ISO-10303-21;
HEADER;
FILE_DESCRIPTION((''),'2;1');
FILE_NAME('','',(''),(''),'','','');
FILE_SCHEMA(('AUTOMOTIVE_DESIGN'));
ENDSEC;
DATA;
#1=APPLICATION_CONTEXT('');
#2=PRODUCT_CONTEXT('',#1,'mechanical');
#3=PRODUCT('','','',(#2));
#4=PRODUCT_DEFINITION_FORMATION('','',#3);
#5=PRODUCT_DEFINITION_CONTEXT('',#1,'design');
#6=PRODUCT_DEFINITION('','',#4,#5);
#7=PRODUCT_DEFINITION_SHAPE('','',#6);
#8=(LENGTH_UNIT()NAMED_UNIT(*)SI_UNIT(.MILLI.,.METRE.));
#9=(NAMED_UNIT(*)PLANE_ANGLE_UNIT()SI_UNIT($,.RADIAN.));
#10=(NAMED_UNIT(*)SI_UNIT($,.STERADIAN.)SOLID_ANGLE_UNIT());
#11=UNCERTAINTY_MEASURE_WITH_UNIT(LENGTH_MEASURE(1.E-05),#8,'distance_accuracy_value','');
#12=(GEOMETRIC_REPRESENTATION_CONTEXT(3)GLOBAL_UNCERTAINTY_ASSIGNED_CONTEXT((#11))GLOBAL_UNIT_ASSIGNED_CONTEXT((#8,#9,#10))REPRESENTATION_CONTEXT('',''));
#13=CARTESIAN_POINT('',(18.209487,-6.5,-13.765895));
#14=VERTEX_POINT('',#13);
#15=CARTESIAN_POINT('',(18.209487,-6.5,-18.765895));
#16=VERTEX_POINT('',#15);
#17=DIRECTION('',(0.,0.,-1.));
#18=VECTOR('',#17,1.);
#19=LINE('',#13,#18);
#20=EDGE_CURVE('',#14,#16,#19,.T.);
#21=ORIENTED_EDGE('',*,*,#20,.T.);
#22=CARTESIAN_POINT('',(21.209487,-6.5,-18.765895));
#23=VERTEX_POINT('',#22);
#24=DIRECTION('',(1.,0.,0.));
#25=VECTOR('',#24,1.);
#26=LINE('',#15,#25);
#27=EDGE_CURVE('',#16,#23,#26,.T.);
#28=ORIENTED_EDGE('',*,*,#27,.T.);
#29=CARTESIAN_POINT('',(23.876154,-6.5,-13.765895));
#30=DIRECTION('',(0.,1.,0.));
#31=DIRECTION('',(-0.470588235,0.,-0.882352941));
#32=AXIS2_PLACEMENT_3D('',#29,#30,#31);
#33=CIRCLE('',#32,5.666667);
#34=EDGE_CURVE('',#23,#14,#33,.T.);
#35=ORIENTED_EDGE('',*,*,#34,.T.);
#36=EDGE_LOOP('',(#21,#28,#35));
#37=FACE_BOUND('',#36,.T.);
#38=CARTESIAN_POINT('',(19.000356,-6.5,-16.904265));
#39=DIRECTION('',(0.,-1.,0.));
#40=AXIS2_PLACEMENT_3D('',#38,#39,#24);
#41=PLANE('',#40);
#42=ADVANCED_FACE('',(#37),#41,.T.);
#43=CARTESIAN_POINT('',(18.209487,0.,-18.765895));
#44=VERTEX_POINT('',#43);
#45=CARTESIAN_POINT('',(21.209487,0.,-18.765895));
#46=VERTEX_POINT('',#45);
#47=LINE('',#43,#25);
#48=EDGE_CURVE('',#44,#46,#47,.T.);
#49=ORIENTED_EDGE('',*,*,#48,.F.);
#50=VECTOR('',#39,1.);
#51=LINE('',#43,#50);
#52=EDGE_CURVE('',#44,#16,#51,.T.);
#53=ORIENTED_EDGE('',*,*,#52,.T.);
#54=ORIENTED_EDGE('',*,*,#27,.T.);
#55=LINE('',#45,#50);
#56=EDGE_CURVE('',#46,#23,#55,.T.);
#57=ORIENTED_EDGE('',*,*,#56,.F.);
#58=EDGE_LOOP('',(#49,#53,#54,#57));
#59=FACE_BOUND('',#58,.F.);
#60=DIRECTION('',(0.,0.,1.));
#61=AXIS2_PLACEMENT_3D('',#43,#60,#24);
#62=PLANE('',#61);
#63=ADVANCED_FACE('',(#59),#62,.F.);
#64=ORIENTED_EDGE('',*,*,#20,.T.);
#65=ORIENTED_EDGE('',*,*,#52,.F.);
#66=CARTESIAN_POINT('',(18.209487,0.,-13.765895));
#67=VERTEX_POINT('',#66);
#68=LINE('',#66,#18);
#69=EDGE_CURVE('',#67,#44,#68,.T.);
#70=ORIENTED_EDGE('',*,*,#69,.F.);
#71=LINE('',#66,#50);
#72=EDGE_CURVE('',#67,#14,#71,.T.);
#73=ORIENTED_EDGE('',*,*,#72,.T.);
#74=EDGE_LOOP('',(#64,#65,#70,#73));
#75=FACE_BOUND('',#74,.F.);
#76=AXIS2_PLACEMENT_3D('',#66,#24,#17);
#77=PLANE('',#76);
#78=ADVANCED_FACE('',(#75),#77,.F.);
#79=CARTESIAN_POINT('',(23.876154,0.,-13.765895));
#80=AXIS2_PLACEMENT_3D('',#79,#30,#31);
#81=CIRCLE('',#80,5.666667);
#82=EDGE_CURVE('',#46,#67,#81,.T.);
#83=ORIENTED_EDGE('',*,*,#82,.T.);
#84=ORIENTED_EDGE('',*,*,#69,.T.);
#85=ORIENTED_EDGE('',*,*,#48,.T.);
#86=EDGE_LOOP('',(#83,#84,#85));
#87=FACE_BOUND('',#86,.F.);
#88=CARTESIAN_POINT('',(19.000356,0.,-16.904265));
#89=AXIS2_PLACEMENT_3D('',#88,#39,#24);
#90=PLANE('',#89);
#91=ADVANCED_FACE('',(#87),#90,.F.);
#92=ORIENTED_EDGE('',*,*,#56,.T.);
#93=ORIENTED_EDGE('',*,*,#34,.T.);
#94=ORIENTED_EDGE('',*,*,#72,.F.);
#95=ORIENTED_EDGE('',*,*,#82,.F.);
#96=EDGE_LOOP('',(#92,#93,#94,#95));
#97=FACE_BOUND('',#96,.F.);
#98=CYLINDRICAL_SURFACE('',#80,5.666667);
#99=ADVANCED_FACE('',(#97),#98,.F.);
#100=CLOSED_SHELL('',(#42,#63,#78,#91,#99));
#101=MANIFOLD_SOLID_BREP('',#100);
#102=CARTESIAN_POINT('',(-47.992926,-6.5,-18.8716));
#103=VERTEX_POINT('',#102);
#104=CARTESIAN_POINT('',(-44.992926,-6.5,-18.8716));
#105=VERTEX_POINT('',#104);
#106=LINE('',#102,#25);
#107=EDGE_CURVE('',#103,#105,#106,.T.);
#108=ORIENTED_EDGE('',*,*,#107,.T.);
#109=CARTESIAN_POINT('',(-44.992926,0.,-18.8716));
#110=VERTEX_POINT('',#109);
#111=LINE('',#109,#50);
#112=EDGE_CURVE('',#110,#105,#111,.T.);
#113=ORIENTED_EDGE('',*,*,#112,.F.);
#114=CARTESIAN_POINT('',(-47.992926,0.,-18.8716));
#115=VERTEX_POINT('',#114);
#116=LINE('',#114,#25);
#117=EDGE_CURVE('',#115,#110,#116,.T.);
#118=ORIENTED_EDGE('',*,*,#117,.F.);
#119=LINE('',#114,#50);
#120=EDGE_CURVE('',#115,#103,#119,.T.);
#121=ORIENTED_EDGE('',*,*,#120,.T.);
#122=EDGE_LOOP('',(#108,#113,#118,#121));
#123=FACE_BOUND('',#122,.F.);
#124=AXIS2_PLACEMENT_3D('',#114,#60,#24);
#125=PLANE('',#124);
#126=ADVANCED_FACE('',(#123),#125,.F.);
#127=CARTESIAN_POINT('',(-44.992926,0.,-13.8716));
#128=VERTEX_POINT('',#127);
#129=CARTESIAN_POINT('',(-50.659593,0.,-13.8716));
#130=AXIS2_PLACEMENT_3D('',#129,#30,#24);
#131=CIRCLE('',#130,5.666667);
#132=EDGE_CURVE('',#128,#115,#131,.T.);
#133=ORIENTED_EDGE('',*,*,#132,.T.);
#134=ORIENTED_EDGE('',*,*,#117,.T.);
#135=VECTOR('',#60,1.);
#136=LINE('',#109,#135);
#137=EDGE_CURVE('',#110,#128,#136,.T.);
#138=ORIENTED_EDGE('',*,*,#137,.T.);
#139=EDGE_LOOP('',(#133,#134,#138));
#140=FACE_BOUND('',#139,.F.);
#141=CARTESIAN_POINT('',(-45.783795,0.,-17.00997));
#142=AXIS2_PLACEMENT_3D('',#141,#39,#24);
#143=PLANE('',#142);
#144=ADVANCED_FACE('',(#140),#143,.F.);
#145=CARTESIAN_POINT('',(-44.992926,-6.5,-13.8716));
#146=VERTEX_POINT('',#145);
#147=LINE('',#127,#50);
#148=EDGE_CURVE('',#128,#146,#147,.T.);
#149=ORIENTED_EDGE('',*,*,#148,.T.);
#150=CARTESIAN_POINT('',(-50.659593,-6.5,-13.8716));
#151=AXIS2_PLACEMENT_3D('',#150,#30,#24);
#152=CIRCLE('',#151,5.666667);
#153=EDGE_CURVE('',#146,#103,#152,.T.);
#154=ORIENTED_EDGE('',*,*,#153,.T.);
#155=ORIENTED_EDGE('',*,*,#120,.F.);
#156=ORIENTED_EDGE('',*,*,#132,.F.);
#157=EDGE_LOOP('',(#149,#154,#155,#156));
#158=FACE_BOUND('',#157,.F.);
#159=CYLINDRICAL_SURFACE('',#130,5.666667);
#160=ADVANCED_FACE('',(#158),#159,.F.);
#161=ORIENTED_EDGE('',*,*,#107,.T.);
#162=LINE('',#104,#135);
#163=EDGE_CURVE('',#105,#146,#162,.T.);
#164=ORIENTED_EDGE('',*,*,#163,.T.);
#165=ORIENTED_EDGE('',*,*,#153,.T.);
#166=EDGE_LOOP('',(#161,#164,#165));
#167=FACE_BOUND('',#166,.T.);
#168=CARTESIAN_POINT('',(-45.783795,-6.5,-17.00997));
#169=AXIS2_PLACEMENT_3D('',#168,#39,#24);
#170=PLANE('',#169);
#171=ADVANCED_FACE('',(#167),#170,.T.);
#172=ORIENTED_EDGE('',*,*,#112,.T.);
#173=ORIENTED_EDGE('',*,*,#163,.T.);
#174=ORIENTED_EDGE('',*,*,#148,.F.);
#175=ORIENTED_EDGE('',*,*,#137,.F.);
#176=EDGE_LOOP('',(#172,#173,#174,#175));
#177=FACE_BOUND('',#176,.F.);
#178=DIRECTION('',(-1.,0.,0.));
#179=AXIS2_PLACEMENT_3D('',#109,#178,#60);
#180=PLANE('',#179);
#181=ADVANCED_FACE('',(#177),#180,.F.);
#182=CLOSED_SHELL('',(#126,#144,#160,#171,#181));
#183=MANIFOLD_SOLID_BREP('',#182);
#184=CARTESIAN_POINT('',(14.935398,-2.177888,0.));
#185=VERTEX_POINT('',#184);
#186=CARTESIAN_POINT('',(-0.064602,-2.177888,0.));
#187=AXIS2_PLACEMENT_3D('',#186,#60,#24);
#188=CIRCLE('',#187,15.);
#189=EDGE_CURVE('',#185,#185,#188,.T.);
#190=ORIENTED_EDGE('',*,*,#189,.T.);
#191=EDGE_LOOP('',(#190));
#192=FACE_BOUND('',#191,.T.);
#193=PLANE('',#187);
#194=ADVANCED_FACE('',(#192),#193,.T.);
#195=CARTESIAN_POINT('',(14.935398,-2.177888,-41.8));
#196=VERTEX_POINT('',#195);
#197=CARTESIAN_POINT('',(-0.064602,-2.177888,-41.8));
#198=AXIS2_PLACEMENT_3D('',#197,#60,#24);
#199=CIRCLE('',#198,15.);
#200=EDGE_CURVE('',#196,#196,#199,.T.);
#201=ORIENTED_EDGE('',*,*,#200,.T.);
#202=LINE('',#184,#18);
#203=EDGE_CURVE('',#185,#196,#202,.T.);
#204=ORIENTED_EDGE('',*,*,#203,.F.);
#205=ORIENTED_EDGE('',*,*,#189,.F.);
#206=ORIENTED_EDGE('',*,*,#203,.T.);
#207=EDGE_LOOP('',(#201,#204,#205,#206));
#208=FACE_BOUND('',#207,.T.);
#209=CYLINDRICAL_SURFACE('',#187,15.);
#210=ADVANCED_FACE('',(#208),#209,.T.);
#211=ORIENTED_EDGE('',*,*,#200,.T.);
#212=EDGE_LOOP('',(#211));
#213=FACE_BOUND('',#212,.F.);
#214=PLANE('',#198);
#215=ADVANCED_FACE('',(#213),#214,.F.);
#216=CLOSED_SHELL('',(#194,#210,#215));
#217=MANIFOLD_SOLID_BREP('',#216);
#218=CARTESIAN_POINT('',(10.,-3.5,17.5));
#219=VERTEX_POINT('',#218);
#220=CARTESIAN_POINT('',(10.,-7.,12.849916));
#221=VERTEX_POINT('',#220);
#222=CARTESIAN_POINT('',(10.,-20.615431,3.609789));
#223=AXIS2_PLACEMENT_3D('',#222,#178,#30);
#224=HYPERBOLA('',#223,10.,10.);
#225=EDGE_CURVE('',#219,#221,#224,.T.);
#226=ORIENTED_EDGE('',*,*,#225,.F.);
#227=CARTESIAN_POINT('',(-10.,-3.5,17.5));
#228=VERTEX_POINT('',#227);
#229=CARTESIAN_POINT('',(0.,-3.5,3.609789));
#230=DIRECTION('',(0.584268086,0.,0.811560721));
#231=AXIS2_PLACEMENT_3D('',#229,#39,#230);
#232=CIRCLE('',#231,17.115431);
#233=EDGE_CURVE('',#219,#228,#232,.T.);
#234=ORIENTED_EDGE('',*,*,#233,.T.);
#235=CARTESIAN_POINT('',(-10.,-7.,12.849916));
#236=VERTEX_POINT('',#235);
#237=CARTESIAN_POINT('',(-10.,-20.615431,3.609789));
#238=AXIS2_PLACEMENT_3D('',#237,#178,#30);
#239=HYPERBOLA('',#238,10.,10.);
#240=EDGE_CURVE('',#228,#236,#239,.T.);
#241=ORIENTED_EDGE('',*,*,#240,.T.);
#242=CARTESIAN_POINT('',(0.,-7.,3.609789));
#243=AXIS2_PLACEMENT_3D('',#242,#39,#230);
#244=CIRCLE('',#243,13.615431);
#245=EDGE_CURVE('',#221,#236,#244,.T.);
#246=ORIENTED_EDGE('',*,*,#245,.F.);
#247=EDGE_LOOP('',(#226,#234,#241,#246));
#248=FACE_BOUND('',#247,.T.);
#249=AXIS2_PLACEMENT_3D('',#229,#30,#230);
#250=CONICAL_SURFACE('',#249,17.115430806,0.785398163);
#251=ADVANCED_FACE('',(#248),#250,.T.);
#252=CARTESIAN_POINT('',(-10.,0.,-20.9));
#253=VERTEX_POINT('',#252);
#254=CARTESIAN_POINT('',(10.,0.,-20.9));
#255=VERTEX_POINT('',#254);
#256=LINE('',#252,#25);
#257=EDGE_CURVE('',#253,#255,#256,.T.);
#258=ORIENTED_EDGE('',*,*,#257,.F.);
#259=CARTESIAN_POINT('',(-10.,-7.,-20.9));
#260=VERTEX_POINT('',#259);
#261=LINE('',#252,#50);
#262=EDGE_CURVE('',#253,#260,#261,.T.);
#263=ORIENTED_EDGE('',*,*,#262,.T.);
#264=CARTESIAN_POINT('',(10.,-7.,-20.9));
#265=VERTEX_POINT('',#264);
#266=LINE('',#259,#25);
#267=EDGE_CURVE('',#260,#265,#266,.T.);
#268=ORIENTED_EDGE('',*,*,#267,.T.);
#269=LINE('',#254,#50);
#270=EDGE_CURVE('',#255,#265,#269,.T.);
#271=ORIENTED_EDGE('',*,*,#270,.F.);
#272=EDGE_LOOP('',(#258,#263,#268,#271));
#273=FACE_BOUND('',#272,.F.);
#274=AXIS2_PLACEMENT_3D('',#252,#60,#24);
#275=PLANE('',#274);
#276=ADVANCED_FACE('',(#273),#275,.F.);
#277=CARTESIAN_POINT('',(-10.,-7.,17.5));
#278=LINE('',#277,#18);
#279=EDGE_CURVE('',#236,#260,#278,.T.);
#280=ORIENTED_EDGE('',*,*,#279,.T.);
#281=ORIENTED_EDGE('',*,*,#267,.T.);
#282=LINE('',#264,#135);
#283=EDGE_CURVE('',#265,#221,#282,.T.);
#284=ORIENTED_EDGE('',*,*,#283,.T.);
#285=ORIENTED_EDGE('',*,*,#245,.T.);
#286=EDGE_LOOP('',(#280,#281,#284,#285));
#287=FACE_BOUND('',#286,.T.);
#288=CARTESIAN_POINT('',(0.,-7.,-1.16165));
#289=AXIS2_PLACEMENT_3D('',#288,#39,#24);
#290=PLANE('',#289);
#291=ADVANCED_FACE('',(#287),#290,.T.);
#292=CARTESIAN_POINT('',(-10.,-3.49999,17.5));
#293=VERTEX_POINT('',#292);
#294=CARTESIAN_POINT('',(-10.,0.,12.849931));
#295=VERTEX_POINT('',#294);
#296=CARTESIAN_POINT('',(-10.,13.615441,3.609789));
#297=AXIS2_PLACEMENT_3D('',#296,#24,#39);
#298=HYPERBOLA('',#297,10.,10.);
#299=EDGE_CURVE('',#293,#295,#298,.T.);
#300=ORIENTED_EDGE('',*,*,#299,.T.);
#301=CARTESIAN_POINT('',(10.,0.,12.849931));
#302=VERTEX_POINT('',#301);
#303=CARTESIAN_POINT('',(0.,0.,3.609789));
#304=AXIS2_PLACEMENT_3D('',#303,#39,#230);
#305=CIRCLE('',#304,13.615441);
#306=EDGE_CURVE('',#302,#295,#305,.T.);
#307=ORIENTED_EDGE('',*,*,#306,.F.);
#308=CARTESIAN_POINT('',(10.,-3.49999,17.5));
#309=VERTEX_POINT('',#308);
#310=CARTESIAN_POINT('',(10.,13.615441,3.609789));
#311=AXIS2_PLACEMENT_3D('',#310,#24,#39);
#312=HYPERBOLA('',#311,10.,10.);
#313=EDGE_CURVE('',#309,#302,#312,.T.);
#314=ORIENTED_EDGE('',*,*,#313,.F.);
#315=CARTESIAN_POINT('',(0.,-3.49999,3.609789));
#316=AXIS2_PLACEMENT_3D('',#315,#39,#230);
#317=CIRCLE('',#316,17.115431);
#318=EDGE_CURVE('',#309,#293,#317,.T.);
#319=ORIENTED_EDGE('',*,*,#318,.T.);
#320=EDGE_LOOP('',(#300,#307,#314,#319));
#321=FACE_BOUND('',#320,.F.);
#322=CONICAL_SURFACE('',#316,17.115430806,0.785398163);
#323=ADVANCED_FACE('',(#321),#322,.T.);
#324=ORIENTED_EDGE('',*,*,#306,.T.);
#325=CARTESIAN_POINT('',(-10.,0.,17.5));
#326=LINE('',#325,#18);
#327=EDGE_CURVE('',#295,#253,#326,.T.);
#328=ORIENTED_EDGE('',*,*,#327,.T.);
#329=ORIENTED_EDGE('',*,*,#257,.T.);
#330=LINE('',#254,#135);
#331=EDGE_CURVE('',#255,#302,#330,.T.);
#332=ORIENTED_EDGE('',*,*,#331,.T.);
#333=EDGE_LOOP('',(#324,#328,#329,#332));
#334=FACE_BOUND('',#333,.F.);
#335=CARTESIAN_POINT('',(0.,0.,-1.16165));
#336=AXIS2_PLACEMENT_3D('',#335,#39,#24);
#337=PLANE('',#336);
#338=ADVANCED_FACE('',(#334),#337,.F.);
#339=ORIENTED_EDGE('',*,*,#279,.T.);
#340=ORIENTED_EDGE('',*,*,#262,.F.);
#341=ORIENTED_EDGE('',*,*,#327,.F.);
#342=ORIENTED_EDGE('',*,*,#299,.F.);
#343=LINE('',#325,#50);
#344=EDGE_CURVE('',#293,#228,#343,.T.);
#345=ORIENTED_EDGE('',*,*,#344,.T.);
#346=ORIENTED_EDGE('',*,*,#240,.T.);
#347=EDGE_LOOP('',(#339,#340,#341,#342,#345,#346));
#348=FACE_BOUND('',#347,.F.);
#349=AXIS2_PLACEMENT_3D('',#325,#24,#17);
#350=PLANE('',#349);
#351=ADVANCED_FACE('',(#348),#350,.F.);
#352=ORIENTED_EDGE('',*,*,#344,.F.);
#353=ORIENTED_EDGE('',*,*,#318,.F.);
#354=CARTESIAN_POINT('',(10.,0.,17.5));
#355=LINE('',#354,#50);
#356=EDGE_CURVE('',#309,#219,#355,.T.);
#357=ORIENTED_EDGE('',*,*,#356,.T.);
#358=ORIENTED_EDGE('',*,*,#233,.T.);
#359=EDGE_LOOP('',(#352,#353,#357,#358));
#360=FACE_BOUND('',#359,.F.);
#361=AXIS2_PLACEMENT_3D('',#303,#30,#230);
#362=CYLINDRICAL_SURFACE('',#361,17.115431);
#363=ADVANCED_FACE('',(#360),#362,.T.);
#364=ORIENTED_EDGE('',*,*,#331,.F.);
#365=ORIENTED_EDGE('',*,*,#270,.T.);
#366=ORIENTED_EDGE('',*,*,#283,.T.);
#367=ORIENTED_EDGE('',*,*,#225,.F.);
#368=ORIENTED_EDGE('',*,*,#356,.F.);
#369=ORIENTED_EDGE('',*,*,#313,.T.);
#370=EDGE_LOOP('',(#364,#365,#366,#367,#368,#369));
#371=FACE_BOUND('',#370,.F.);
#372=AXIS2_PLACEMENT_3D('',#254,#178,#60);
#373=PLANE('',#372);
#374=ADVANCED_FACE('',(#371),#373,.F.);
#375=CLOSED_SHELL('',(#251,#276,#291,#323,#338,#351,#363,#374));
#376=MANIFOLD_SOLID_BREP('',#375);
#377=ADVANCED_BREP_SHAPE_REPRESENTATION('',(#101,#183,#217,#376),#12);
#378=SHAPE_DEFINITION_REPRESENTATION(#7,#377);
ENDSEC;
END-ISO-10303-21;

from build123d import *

# Parameters (mm, degrees)
F1_DEPTH = 7
F2_SIZE2 = 3.5
F2_SIZE  = 3.5
F3_SIZE  = 3.49999
F4_R     = 15
F5_DEPTH = 41.8
F8_DEPTH = 6.5
F9_DEPTH = 6.5


# Not quite as in the source:
# - a fillet or chamfer is up to 0.001 mm smaller than in the source, because OpenCascade refuses the exact size


with BuildPart() as f1:
    # F0 (on Front) → F1 (new body)
    with BuildSketch(Plane.XZ):
        with BuildLine():
            Line((-10, 17.5), (-10, -20.9))
            Line((-10, -20.9), (10, -20.9))
            Line((10, -20.9), (10, 17.5))
            ThreePointArc((10, 17.5), (0, 20.7252194443), (-10, 17.5))
        make_face()
    extrude(amount=F1_DEPTH)

    # F2
    f2_edges = [f1.edges().sort_by_distance(p)[0] for p in [
        (0, -7, 20.725219),
    ]]
    chamfer(f2_edges, length=F2_SIZE, length2=F2_SIZE2)

    # F3 (size 3.5 in the source; OpenCascade refuses exactly that, so slightly less here)
    f3_edges = [f1.edges().sort_by_distance(p)[0] for p in [
        (0, 0, 20.725219),
    ]]
    chamfer(f3_edges, length=F3_SIZE)


with BuildPart() as f5:
    # F4 (on Top) → F5 (new body)
    with BuildSketch(Plane.XY):
        with Locations((-0.06460234, -2.1778875962)):
            Circle(F4_R)
    extrude(amount=-F5_DEPTH)


with BuildPart() as f8:
    # F7 (on Front) → F8 (new body)
    with BuildSketch(Plane.XZ):
        with BuildLine():
            Line((18.2094871998, -13.7658946961), (18.2094871998, -18.7658946961))
            Line((18.2094871998, -18.7658946961), (21.2094871998, -18.7658946961))
            ThreePointArc((21.2094871998, -18.7658946961), (19.0170272874, -16.6813706435), (18.2094871998, -13.7658946961))
        make_face()
    extrude(amount=F8_DEPTH)


with BuildPart() as f9:
    # F6 (on Front) → F9 (new body)
    with BuildSketch(Plane.XZ):
        with BuildLine():
            ThreePointArc((-44.992926091, -13.8715998083), (-45.8004661786, -16.7870757558), (-47.992926091, -18.8715998083))
            Line((-47.992926091, -18.8715998083), (-44.992926091, -18.8715998083))
            Line((-44.992926091, -18.8715998083), (-44.992926091, -13.8715998083))
        make_face()
    extrude(amount=F9_DEPTH)


solid = Compound([f1.part, f5.part, f8.part, f9.part])
